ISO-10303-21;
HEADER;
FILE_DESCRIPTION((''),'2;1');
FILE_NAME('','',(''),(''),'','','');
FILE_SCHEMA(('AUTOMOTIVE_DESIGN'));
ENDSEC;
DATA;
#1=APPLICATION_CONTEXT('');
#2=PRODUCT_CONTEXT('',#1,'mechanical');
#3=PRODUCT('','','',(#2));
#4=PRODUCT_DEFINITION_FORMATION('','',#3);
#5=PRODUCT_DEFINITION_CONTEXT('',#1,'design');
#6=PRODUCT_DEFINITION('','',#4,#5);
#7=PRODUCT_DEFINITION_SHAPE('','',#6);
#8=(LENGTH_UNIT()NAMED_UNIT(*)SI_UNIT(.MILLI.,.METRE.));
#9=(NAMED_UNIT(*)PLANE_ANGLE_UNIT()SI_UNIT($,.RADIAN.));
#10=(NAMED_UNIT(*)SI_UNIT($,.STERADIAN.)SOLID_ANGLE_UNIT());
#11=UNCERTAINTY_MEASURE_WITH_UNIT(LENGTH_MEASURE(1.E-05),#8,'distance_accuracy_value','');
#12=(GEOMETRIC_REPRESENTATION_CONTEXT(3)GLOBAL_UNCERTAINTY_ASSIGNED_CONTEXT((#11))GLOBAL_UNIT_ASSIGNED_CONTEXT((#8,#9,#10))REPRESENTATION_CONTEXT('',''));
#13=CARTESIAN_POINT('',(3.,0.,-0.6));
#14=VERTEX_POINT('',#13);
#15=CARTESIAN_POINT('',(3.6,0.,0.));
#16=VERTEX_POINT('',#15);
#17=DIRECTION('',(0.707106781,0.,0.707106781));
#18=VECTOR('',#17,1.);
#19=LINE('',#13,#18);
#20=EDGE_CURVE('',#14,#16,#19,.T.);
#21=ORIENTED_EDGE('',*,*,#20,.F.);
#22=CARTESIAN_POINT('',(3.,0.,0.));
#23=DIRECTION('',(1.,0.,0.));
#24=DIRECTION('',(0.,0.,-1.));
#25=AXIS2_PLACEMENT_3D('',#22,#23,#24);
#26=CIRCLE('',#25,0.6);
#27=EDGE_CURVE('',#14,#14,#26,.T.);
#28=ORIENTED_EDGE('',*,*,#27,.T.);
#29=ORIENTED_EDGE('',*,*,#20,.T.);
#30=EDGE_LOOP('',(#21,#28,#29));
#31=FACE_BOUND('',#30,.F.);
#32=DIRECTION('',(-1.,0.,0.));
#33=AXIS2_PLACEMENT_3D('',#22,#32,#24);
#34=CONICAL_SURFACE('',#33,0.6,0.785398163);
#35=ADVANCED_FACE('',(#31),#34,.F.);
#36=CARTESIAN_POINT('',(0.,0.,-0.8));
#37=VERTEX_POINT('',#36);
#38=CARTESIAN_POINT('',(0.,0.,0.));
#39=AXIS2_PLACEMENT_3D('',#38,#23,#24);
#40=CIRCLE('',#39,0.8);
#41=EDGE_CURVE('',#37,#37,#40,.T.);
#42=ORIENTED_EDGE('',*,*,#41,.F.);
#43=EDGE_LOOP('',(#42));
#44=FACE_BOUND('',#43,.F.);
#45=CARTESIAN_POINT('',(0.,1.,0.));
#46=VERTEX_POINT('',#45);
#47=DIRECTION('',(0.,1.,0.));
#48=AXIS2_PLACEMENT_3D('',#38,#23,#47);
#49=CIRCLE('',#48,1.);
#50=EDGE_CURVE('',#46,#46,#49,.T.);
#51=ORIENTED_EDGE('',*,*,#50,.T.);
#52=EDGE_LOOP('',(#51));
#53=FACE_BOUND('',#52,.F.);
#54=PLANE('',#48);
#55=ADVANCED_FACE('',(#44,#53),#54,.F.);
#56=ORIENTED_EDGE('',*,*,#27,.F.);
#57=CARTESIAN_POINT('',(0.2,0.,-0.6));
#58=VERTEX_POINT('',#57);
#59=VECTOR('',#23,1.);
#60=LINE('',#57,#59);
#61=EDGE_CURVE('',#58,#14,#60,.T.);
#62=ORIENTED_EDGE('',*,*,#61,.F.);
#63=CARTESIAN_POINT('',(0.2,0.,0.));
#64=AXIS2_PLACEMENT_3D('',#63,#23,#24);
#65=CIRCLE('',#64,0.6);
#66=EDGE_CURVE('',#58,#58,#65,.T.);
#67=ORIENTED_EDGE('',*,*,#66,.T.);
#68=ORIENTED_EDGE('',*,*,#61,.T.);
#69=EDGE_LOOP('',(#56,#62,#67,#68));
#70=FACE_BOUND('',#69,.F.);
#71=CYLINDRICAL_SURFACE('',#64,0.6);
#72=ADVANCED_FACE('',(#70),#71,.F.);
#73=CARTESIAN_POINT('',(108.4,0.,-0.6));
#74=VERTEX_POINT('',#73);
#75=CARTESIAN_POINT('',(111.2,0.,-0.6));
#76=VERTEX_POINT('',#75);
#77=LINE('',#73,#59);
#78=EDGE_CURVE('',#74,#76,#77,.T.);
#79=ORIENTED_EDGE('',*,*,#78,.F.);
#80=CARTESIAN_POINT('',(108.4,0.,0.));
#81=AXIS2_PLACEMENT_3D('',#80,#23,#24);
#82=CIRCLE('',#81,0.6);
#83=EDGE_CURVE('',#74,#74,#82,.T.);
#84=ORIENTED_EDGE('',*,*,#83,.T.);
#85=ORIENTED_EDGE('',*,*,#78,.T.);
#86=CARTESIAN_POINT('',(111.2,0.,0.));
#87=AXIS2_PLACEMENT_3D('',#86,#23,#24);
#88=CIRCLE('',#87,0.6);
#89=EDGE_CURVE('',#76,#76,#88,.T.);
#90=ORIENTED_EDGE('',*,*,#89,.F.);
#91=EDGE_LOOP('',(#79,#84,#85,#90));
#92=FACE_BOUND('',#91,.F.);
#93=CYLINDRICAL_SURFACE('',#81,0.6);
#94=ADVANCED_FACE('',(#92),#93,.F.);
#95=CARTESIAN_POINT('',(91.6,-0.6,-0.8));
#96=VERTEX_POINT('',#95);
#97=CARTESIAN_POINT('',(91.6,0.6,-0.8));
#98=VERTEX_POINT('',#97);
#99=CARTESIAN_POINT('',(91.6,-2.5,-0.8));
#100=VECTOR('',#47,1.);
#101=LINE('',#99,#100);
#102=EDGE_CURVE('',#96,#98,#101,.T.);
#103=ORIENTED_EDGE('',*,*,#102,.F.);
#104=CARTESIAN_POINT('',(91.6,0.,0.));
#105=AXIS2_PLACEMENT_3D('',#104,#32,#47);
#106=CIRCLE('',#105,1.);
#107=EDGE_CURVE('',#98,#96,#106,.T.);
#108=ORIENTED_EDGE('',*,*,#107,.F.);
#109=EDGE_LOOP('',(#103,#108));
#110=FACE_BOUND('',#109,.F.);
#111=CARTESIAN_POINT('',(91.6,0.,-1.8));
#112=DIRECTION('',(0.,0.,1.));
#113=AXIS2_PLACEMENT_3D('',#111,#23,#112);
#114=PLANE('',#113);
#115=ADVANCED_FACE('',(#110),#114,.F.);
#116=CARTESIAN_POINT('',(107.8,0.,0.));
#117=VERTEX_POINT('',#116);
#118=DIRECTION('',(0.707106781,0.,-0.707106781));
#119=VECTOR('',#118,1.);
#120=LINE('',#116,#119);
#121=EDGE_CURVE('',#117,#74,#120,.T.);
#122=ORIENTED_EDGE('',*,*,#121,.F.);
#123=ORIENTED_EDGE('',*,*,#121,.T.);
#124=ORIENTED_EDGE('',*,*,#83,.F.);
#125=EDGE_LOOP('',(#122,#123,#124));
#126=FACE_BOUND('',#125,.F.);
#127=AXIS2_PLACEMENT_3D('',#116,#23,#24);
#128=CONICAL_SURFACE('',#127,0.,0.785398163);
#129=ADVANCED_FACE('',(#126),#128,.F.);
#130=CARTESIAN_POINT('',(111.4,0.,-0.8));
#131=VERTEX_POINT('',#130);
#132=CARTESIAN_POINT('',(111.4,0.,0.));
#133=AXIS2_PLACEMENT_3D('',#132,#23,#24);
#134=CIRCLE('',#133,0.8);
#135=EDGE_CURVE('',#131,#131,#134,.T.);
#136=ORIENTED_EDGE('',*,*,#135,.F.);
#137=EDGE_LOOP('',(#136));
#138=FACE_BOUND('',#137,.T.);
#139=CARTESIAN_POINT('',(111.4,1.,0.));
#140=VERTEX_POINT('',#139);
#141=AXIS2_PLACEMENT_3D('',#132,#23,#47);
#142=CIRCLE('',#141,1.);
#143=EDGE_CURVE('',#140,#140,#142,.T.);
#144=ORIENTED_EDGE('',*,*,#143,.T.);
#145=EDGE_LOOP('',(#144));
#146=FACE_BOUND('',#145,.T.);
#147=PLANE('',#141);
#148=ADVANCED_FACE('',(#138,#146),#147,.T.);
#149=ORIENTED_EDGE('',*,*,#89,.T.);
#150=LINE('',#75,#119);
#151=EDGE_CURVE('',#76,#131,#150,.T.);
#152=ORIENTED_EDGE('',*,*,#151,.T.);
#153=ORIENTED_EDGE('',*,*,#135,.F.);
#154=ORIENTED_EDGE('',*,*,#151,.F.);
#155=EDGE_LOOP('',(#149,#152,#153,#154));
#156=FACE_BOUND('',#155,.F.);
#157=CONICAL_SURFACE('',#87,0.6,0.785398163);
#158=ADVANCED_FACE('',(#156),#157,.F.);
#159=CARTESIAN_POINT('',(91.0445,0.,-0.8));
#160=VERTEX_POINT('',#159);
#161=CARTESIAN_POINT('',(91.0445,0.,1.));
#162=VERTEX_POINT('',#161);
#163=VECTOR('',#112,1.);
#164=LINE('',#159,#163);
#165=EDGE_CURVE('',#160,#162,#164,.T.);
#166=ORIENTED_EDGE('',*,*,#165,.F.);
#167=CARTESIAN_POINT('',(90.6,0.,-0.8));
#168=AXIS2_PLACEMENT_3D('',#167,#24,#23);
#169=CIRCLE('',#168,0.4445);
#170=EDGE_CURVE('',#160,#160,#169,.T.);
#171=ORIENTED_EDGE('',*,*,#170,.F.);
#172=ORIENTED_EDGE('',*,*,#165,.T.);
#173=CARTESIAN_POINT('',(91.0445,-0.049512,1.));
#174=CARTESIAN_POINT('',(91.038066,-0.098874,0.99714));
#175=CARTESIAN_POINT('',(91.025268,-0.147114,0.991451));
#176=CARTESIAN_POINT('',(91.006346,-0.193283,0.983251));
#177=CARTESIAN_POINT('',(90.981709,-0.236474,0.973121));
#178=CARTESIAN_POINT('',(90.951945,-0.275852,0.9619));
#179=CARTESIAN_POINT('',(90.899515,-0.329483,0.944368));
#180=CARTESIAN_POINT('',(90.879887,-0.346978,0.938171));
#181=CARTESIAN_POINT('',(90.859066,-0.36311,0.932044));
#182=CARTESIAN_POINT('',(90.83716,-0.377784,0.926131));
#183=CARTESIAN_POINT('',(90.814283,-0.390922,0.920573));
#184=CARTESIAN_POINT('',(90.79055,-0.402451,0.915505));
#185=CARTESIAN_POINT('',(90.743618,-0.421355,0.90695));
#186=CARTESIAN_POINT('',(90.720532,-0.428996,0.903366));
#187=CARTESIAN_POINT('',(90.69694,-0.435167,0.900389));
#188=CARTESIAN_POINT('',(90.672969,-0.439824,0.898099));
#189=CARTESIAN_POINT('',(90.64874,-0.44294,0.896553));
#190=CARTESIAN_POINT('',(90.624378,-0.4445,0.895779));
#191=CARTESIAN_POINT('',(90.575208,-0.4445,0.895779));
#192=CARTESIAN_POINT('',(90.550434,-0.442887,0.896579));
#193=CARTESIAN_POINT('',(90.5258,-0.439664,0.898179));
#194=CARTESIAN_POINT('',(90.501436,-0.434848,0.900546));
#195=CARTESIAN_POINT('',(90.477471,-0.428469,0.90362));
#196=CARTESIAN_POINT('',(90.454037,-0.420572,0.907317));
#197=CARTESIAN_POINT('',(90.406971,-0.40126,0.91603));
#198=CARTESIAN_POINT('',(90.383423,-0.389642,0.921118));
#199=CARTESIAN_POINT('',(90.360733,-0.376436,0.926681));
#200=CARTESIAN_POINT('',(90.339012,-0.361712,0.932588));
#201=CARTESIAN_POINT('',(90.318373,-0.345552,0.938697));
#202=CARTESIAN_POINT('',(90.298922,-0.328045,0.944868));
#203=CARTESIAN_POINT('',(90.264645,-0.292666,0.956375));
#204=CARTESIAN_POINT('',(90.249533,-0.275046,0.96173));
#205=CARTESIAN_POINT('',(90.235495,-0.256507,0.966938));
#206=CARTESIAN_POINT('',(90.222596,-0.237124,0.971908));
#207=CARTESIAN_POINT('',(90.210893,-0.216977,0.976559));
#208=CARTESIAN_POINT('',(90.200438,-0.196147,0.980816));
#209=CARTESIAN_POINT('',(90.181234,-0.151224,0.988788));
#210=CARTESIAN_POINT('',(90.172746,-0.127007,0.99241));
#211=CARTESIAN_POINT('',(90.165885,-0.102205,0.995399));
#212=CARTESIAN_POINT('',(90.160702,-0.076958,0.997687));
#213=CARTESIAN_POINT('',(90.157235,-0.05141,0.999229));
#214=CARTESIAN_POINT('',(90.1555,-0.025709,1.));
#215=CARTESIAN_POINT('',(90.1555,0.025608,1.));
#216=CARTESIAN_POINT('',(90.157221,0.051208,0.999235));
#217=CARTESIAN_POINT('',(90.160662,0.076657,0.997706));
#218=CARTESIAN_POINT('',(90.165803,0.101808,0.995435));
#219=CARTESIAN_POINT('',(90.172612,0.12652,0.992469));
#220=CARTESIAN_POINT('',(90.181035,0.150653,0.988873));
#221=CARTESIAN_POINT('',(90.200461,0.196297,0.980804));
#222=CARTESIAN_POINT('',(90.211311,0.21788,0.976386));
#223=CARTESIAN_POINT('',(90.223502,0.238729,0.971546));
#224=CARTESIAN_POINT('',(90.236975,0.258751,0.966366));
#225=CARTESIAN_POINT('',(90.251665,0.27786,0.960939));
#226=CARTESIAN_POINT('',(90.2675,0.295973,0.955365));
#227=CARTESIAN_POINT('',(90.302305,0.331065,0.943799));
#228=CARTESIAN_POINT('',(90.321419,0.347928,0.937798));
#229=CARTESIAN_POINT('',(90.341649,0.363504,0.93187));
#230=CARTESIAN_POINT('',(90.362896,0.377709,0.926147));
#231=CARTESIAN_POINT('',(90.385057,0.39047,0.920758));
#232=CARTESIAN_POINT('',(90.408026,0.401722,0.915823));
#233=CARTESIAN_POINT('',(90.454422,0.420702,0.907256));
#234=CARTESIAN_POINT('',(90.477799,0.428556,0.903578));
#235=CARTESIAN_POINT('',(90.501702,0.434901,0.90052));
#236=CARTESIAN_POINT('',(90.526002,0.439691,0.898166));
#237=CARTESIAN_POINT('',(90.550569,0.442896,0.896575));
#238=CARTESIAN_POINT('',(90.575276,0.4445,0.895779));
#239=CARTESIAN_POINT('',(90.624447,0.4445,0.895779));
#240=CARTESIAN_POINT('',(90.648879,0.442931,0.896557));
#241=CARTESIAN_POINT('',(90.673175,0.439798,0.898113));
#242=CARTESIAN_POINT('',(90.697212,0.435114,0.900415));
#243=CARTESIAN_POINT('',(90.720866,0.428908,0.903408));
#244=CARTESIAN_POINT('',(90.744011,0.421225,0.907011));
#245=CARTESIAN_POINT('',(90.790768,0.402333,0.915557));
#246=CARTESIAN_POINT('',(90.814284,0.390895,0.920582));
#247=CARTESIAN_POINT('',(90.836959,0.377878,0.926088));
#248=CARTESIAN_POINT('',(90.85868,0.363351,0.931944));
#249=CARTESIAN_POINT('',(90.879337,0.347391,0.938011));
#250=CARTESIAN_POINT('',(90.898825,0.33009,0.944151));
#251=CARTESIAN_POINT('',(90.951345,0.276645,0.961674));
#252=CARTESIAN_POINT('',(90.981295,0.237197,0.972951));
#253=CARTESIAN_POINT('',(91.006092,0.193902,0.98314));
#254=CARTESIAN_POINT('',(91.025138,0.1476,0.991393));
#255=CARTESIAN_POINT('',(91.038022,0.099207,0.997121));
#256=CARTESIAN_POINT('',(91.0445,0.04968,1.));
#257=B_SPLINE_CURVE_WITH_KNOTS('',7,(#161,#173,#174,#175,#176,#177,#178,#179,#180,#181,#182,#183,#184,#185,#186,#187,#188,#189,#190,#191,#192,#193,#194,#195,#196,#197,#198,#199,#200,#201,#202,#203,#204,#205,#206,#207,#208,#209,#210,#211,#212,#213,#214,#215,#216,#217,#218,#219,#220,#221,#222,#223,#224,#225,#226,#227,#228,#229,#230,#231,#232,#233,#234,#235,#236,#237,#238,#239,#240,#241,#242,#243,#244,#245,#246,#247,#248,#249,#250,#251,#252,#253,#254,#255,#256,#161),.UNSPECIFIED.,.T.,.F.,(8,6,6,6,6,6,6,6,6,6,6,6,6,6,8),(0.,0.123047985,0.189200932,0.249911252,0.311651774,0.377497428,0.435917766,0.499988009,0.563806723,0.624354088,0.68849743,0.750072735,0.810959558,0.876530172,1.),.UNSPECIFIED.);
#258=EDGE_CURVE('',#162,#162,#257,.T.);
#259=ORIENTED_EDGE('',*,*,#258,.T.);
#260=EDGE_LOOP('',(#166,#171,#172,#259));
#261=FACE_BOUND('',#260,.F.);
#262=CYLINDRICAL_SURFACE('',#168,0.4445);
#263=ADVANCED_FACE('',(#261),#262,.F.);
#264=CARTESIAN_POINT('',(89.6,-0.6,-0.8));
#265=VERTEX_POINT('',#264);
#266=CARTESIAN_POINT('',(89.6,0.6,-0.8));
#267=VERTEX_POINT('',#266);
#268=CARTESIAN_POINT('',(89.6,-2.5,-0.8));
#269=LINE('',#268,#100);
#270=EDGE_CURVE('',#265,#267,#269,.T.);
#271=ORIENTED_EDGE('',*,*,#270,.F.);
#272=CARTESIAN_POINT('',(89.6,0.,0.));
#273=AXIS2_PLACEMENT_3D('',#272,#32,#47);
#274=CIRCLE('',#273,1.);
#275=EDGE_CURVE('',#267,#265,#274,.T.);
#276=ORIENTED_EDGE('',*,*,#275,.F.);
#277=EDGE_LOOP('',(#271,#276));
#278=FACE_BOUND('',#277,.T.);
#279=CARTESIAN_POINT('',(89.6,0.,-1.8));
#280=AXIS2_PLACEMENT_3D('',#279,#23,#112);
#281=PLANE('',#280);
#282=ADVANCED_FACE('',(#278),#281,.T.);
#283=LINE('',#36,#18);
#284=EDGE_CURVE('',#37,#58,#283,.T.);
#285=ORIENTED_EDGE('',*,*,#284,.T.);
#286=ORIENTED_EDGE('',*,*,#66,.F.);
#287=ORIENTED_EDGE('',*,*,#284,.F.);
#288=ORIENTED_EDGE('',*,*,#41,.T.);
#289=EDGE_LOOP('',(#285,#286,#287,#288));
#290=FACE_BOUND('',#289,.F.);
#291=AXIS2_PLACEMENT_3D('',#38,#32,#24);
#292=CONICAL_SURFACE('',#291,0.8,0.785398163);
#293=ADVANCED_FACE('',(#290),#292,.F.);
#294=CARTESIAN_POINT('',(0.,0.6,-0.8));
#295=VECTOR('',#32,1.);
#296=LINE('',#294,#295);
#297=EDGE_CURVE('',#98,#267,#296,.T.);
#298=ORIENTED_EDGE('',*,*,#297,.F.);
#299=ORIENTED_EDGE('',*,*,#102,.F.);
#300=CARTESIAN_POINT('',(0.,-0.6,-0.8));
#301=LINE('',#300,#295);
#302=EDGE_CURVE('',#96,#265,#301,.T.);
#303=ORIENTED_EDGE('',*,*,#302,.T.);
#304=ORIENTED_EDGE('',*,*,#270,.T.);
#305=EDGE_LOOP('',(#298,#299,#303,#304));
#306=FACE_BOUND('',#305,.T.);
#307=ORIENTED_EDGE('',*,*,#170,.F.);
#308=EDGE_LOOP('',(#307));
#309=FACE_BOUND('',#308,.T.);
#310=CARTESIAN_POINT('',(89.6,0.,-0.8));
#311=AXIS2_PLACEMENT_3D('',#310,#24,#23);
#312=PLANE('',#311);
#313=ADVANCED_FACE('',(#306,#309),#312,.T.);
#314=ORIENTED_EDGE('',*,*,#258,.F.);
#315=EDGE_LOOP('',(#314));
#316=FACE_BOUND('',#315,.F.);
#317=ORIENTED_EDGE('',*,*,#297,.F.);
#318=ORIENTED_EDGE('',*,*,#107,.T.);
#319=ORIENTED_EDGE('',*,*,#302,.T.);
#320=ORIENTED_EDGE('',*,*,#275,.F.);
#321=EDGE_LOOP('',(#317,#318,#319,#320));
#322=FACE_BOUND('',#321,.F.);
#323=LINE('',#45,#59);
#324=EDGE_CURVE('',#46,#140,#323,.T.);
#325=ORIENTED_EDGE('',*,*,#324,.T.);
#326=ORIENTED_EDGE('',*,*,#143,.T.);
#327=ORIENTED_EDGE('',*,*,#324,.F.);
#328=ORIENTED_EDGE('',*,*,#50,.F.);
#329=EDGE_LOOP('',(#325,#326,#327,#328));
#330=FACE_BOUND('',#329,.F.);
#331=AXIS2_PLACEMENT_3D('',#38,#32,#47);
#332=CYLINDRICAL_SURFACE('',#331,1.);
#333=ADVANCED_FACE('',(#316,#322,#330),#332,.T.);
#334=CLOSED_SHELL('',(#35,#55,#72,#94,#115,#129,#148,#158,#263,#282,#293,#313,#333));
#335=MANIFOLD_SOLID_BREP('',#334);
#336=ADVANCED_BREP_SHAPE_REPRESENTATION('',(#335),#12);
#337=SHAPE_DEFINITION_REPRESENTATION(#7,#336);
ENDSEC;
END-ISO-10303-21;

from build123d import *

# Parameters (mm, degrees)
F0_R     = 1
F1_DEPTH = 111.4
F2_W     = 2
F2_H     = 1
F3_DEPTH = 2.5
F6_R     = 0.4445
F7_DEPTH = 25


# Not quite as in the source:
# - a feature names something its author has since deleted; it is built from what else it names


with BuildPart() as f1:
    # F0 (on Right) → F1 (new body)
    with BuildSketch(Plane.YZ):
        Circle(F0_R)
    extrude(amount=F1_DEPTH)

    # F2 (on Front) → F3 (cut, symmetric)
    with BuildSketch(Plane.XZ):
        with Locations((90.6, -1.3)):
            Rectangle(F2_W, F2_H)
    extrude(amount=F3_DEPTH, both=True, mode=Mode.SUBTRACT)

    # F4 (on Front) → F5 (revolve, cut)
    with BuildSketch(Plane.XZ):
        Polygon((111.4, -0.8), (111.4, 0), (107.8, 0), (108.4, -0.6), (111.2, -0.6), align=None)
        Polygon((0.2, -0.6), (3, -0.6), (3.6, 0), (0, 0), (0, -0.8), align=None)
    revolve(axis=Axis((55.7, 0, 0), (1, 0, 0)), mode=Mode.SUBTRACT)

    # F6 (on face) → F7 (cut)
    with BuildSketch(Plane(origin=(0, 0, -0.8), x_dir=(1, 0, 0), z_dir=(0, 0, -1))):
        with Locations((90.6, 0)):
            Circle(F6_R)
    extrude(amount=-F7_DEPTH, mode=Mode.SUBTRACT)


solid = f1.part
